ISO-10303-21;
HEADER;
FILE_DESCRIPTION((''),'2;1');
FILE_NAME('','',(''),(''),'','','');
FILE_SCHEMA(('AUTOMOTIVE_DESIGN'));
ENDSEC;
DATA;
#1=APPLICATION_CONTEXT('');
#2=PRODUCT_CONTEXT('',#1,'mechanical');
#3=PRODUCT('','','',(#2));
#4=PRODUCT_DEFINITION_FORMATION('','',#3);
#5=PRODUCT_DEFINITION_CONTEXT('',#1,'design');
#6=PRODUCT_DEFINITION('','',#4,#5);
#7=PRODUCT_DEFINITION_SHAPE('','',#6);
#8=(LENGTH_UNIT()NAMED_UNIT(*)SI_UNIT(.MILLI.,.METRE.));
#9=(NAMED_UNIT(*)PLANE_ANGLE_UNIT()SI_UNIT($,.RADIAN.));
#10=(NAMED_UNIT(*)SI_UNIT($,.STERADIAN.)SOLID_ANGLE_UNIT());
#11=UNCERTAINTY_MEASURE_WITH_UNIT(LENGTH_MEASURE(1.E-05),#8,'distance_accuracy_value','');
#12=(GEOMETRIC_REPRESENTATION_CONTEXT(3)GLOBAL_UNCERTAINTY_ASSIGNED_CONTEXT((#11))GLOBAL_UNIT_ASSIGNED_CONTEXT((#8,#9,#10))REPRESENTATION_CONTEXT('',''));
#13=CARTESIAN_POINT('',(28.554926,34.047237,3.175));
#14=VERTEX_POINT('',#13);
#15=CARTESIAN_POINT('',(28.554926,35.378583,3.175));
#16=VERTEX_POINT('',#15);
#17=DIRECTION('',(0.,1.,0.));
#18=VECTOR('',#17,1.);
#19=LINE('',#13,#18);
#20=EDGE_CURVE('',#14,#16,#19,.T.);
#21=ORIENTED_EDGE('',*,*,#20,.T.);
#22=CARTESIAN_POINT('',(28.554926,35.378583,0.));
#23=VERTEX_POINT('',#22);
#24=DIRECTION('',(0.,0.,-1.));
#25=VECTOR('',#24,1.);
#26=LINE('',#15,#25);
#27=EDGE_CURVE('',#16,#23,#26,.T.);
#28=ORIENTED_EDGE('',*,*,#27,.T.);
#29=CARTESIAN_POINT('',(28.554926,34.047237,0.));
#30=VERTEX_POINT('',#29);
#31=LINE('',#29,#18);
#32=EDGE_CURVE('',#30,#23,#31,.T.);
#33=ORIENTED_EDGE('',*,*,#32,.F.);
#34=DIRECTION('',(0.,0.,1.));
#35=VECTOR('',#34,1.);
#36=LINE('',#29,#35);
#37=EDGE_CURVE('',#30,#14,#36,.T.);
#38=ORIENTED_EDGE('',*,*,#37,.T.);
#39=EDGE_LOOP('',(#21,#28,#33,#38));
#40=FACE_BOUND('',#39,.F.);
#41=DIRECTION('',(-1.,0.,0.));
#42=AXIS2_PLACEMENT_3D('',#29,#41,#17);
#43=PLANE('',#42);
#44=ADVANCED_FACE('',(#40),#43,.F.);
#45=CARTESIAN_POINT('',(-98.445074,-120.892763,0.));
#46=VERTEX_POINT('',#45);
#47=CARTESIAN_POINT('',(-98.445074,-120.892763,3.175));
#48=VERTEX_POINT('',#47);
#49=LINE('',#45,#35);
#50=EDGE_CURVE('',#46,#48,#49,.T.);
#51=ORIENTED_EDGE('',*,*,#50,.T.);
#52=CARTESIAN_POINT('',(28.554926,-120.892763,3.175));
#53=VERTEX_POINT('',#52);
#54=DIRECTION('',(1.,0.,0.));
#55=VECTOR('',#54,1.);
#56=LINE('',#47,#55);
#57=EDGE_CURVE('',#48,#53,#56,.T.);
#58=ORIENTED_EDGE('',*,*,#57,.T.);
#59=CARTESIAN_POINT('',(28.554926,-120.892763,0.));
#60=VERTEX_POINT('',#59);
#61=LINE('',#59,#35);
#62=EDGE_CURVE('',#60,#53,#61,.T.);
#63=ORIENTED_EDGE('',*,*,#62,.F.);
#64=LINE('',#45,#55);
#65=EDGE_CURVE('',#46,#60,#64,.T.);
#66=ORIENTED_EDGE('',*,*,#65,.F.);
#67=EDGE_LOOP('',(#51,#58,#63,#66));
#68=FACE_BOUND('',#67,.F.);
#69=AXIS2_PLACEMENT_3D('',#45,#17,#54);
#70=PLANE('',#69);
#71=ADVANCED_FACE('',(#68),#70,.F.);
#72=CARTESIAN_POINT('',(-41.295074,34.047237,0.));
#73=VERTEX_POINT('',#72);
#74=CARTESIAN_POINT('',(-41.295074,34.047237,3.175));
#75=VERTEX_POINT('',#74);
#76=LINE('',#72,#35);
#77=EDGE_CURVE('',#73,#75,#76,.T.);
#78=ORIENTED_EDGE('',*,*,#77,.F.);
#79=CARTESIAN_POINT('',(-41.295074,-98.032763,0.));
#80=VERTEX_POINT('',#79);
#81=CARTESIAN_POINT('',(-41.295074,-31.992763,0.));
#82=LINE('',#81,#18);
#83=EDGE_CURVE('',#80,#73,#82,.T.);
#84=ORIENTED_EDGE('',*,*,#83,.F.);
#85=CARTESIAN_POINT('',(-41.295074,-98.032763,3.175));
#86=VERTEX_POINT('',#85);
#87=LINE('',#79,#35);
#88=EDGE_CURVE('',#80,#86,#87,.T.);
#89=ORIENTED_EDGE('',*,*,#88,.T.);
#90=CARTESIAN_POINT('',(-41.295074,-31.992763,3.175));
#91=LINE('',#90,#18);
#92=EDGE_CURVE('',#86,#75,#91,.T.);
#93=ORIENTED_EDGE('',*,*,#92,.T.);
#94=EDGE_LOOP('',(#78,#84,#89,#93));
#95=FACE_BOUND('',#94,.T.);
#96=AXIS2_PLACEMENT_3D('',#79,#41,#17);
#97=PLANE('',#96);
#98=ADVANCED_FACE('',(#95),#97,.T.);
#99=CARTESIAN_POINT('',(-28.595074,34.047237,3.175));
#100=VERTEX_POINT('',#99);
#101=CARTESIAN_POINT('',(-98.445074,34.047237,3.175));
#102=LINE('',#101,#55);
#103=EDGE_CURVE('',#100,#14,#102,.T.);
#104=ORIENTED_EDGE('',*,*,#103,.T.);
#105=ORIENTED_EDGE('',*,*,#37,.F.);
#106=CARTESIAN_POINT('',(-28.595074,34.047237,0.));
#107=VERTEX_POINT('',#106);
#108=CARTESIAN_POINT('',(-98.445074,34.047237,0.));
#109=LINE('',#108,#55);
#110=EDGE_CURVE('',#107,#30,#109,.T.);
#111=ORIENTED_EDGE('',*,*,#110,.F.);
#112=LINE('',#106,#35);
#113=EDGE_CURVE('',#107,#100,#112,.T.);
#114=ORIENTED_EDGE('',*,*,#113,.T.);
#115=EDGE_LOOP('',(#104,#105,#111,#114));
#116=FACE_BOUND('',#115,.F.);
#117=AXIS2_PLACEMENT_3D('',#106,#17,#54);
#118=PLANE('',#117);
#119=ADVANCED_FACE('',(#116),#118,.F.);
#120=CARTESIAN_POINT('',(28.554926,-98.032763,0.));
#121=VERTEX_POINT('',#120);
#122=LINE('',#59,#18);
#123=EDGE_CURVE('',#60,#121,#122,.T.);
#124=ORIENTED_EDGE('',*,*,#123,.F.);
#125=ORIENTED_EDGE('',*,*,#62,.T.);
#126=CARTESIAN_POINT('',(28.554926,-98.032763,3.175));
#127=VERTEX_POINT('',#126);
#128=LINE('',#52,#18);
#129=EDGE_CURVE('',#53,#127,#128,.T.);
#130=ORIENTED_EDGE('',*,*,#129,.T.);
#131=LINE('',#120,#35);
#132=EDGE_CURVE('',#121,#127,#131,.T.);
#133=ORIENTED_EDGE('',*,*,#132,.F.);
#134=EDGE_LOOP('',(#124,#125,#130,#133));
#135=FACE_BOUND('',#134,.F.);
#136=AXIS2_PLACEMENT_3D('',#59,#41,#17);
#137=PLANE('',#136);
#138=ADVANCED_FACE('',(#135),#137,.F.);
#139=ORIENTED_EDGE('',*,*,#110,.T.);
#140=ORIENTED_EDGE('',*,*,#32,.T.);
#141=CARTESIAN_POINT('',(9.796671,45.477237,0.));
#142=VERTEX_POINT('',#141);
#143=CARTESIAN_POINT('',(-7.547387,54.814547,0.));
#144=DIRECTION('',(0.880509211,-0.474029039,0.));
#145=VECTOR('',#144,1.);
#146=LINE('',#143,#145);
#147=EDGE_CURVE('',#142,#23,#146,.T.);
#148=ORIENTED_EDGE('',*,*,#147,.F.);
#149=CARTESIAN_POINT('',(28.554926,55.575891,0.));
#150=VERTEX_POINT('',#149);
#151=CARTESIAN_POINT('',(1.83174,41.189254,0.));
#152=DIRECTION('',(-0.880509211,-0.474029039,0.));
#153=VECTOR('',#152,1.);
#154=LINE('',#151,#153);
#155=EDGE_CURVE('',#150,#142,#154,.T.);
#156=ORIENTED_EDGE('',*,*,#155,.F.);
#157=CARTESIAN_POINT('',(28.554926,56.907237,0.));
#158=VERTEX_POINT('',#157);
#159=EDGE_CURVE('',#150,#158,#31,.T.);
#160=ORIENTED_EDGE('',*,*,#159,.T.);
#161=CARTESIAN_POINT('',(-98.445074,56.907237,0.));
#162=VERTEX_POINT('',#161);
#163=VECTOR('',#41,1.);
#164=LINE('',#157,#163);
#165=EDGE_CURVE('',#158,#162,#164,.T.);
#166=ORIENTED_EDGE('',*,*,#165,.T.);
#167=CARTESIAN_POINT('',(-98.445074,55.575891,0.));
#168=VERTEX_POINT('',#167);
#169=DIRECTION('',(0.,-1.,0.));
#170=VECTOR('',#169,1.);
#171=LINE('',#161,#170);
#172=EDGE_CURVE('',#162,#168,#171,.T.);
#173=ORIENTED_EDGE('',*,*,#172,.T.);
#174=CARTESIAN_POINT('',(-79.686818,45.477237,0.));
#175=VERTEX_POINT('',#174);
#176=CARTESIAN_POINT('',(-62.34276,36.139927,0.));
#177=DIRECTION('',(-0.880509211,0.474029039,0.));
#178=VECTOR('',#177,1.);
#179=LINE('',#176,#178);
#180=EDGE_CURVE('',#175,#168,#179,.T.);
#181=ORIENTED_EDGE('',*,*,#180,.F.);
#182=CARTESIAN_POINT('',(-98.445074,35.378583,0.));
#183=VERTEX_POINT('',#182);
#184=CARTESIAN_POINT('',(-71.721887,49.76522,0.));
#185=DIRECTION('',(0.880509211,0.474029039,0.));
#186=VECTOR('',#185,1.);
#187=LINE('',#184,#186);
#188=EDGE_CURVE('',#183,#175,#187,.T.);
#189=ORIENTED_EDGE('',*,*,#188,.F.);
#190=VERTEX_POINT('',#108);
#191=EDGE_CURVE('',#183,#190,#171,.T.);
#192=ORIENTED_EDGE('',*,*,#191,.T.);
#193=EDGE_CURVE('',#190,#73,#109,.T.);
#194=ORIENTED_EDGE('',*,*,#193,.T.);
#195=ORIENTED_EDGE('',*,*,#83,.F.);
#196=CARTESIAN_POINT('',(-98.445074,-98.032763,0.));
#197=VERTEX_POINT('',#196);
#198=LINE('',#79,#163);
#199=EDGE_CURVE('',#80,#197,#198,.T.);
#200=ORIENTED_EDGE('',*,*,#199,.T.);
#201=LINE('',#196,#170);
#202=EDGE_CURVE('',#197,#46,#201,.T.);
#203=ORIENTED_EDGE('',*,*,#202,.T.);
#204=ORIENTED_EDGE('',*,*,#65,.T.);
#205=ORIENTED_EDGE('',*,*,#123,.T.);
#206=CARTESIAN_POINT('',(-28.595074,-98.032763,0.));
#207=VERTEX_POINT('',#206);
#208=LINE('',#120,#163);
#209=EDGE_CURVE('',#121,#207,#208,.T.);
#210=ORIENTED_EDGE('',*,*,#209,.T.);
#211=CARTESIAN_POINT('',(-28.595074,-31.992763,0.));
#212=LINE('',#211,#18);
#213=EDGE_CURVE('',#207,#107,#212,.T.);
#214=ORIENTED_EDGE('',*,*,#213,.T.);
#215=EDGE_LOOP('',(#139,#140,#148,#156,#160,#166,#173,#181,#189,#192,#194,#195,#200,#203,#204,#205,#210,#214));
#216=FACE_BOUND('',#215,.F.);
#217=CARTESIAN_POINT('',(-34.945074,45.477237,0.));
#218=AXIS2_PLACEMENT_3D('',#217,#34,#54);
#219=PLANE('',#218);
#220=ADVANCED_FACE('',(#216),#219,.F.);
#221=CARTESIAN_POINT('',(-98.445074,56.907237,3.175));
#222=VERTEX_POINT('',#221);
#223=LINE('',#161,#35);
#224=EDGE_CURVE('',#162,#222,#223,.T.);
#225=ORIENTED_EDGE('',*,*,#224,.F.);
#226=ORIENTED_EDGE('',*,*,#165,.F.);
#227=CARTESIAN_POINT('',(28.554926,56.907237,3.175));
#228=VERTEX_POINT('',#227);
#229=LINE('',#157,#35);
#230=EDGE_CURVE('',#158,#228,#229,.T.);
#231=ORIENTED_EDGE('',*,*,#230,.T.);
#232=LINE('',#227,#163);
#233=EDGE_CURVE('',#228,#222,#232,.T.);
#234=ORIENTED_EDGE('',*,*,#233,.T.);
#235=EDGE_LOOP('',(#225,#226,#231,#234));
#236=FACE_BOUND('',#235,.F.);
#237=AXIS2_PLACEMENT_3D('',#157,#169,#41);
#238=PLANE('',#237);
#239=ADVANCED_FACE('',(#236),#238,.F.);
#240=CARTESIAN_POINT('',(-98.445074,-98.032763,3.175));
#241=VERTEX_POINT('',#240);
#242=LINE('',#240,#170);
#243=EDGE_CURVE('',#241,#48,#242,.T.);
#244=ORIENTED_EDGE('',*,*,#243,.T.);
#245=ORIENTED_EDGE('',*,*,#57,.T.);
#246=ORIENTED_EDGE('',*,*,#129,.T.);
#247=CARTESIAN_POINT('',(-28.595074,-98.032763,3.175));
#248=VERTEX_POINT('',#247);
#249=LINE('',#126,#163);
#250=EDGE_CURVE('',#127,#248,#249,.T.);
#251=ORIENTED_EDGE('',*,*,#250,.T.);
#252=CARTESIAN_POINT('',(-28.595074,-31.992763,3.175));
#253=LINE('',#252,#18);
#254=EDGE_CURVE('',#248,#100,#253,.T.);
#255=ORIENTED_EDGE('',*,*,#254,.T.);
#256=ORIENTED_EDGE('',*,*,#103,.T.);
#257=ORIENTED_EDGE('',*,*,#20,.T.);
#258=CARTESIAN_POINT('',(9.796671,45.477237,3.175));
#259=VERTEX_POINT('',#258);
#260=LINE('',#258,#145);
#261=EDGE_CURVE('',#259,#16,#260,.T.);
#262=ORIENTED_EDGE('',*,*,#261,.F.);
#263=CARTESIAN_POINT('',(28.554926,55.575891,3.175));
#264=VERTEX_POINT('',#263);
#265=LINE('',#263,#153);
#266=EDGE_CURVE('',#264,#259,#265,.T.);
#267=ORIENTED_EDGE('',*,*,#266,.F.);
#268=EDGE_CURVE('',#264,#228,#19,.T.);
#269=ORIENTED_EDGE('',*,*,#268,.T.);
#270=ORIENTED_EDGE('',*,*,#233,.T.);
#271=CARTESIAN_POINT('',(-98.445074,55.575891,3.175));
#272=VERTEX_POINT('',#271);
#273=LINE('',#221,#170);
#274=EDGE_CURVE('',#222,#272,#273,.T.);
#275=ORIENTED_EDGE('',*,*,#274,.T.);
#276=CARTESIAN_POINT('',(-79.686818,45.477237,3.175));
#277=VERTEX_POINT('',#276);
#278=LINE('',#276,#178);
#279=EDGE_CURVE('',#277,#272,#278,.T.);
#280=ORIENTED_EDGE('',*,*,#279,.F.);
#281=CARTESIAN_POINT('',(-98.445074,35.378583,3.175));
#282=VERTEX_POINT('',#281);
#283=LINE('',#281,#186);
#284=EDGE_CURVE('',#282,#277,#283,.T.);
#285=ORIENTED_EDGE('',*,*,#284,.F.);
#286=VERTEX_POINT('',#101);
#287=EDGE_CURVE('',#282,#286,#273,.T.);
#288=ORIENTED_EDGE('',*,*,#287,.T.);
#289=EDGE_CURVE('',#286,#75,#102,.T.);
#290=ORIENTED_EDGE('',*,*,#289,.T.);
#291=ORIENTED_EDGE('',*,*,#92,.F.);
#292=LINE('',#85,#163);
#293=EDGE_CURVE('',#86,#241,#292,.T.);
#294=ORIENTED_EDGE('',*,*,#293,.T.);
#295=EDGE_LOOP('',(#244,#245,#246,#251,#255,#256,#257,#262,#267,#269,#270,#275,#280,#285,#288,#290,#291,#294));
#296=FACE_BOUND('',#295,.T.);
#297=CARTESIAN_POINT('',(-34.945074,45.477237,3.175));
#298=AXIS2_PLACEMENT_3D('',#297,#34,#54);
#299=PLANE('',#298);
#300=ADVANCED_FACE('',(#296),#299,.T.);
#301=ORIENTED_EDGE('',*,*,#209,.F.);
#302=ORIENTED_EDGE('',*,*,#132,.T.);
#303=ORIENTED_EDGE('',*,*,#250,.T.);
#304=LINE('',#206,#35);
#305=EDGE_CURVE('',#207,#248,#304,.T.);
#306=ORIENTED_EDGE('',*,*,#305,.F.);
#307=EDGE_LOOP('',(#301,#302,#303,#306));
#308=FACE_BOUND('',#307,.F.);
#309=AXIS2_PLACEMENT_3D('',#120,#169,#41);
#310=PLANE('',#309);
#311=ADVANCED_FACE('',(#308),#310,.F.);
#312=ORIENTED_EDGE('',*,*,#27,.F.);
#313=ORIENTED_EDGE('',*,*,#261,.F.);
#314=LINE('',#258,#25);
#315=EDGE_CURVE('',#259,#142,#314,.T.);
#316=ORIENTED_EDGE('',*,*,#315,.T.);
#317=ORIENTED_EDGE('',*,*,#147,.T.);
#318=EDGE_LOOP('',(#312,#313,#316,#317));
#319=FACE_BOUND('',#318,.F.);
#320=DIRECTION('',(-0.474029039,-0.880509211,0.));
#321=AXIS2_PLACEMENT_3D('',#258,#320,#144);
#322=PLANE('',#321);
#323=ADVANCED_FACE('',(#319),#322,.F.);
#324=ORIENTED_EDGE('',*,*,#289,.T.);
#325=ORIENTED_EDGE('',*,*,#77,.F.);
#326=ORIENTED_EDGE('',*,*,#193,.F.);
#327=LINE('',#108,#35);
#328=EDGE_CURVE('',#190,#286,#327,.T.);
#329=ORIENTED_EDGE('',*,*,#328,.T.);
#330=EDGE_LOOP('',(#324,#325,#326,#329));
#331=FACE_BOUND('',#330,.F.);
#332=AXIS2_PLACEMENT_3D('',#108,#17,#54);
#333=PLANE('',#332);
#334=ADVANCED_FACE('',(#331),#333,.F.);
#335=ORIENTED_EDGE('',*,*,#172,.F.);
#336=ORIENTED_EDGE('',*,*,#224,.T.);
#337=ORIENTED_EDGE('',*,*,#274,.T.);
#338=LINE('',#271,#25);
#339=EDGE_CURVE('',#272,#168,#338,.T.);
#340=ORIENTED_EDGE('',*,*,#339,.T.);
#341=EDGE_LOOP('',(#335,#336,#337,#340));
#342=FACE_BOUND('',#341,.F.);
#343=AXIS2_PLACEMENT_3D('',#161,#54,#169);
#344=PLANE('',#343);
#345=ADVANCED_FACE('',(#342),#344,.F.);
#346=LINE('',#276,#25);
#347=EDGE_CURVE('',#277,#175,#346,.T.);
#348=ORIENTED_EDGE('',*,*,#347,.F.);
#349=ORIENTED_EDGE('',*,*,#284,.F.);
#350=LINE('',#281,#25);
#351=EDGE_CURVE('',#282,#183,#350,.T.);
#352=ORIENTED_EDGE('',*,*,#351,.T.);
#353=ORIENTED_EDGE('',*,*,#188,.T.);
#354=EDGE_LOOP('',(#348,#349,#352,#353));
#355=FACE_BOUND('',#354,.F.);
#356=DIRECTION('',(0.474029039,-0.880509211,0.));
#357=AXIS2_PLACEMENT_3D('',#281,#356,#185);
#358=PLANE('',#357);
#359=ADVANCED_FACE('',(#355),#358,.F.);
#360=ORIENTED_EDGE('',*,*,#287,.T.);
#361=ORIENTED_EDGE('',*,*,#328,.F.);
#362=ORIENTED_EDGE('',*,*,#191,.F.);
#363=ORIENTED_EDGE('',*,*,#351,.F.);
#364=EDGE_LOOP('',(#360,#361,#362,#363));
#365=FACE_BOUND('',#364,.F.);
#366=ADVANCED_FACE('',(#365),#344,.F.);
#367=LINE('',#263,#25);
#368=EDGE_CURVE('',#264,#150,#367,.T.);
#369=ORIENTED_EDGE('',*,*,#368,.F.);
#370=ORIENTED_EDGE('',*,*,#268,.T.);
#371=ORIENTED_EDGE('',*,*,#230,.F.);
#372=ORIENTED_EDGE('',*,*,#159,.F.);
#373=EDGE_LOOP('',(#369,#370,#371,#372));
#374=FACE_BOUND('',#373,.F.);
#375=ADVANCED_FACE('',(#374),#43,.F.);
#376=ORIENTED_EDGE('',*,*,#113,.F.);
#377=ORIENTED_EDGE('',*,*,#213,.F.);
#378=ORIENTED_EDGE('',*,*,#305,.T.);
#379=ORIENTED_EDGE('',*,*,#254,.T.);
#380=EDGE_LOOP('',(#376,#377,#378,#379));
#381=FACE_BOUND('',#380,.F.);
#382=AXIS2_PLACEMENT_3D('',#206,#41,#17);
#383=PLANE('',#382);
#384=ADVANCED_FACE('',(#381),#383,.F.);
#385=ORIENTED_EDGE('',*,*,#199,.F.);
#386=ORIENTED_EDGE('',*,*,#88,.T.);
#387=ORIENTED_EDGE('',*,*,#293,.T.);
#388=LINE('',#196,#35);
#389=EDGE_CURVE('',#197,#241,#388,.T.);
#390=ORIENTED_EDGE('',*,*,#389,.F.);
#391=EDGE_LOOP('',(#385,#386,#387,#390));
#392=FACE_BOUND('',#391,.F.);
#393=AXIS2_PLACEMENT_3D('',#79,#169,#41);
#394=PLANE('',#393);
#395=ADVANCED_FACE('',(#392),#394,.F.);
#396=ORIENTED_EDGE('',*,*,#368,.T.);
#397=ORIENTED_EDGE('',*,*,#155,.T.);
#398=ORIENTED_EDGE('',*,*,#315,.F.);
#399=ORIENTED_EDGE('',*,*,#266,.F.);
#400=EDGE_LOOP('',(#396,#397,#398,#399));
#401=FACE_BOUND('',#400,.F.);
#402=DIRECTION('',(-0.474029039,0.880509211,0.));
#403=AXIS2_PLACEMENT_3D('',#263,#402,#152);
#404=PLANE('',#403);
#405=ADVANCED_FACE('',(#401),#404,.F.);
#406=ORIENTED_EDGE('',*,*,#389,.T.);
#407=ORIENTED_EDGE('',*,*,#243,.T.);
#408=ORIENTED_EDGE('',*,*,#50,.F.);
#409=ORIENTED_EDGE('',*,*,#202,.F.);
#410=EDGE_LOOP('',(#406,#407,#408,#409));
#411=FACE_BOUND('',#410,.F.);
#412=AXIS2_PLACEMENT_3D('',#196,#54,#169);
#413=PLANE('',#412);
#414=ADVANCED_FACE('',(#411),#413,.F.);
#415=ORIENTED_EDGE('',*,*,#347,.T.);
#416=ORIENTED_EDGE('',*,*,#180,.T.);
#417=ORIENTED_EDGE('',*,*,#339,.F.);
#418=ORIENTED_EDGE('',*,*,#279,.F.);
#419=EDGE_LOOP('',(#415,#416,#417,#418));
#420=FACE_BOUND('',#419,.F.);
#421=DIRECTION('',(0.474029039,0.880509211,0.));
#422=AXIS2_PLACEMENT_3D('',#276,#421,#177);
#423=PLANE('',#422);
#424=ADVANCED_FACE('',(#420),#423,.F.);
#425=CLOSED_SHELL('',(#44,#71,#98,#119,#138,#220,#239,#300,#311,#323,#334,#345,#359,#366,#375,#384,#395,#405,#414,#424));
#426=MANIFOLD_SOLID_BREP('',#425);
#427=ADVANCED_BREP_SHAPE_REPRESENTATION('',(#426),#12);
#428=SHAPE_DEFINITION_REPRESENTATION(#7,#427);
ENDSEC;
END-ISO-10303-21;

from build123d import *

# Parameters (mm, degrees)
F0_W     = 12.7
F0_H     = 132.08
F1_DEPTH = 3.175
F3_DEPTH = 25.4
F4_DEPTH = 25.4


# Not quite as in the source:
# - a feature names something its author has since deleted; it is built from what else it names


with BuildPart() as f1:
    # F0 (on Top) → F1 (new body)
    with BuildSketch(Plane.XY):
        Polygon((28.5549264625, 56.9072367892), (-98.4450735375, 56.9072367892), (-98.4450735375, 34.0472367892), (-41.2950735375, 34.0472367892), (-28.5950735375, 34.0472367892), (28.5549264625, 34.0472367892), align=None)
        with Locations((-34.9450735375, -31.9927632108)):
            Rectangle(F0_W, F0_H)
        Polygon((-41.2950735375, -98.0327632108), (-98.4450735375, -98.0327632108), (-98.4450735375, -120.8927632108), (28.5549264625, -120.8927632108), (28.5549264625, -98.0327632108), (-28.5950735375, -98.0327632108), align=None)
    extrude(amount=F1_DEPTH)

    # F2 (on face) → F3 (cut)
    with BuildSketch(Plane.XY.offset(3.175)):
        Polygon((28.5549264625, 45.4772367892), (9.7966708748, 45.4772367892), (28.5549264625, 35.3785827756), align=None)
        Polygon((-98.4450735375, 35.3785827756), (-79.6868179499, 45.4772367892), (-98.4450735375, 45.4772367892), align=None)
    extrude(amount=-F3_DEPTH, mode=Mode.SUBTRACT)

    # F2 (on face) → F4 (cut)
    with BuildSketch(Plane.XY.offset(3.175)):
        Polygon((28.5549264625, 55.5758908027), (9.7966708748, 45.4772367892), (28.5549264625, 45.4772367892), align=None)
        Polygon((-98.4450735375, 45.4772367892), (-79.6868179499, 45.4772367892), (-98.4450735375, 55.5758908027), align=None)
    extrude(amount=-F4_DEPTH, mode=Mode.SUBTRACT)


solid = f1.part
